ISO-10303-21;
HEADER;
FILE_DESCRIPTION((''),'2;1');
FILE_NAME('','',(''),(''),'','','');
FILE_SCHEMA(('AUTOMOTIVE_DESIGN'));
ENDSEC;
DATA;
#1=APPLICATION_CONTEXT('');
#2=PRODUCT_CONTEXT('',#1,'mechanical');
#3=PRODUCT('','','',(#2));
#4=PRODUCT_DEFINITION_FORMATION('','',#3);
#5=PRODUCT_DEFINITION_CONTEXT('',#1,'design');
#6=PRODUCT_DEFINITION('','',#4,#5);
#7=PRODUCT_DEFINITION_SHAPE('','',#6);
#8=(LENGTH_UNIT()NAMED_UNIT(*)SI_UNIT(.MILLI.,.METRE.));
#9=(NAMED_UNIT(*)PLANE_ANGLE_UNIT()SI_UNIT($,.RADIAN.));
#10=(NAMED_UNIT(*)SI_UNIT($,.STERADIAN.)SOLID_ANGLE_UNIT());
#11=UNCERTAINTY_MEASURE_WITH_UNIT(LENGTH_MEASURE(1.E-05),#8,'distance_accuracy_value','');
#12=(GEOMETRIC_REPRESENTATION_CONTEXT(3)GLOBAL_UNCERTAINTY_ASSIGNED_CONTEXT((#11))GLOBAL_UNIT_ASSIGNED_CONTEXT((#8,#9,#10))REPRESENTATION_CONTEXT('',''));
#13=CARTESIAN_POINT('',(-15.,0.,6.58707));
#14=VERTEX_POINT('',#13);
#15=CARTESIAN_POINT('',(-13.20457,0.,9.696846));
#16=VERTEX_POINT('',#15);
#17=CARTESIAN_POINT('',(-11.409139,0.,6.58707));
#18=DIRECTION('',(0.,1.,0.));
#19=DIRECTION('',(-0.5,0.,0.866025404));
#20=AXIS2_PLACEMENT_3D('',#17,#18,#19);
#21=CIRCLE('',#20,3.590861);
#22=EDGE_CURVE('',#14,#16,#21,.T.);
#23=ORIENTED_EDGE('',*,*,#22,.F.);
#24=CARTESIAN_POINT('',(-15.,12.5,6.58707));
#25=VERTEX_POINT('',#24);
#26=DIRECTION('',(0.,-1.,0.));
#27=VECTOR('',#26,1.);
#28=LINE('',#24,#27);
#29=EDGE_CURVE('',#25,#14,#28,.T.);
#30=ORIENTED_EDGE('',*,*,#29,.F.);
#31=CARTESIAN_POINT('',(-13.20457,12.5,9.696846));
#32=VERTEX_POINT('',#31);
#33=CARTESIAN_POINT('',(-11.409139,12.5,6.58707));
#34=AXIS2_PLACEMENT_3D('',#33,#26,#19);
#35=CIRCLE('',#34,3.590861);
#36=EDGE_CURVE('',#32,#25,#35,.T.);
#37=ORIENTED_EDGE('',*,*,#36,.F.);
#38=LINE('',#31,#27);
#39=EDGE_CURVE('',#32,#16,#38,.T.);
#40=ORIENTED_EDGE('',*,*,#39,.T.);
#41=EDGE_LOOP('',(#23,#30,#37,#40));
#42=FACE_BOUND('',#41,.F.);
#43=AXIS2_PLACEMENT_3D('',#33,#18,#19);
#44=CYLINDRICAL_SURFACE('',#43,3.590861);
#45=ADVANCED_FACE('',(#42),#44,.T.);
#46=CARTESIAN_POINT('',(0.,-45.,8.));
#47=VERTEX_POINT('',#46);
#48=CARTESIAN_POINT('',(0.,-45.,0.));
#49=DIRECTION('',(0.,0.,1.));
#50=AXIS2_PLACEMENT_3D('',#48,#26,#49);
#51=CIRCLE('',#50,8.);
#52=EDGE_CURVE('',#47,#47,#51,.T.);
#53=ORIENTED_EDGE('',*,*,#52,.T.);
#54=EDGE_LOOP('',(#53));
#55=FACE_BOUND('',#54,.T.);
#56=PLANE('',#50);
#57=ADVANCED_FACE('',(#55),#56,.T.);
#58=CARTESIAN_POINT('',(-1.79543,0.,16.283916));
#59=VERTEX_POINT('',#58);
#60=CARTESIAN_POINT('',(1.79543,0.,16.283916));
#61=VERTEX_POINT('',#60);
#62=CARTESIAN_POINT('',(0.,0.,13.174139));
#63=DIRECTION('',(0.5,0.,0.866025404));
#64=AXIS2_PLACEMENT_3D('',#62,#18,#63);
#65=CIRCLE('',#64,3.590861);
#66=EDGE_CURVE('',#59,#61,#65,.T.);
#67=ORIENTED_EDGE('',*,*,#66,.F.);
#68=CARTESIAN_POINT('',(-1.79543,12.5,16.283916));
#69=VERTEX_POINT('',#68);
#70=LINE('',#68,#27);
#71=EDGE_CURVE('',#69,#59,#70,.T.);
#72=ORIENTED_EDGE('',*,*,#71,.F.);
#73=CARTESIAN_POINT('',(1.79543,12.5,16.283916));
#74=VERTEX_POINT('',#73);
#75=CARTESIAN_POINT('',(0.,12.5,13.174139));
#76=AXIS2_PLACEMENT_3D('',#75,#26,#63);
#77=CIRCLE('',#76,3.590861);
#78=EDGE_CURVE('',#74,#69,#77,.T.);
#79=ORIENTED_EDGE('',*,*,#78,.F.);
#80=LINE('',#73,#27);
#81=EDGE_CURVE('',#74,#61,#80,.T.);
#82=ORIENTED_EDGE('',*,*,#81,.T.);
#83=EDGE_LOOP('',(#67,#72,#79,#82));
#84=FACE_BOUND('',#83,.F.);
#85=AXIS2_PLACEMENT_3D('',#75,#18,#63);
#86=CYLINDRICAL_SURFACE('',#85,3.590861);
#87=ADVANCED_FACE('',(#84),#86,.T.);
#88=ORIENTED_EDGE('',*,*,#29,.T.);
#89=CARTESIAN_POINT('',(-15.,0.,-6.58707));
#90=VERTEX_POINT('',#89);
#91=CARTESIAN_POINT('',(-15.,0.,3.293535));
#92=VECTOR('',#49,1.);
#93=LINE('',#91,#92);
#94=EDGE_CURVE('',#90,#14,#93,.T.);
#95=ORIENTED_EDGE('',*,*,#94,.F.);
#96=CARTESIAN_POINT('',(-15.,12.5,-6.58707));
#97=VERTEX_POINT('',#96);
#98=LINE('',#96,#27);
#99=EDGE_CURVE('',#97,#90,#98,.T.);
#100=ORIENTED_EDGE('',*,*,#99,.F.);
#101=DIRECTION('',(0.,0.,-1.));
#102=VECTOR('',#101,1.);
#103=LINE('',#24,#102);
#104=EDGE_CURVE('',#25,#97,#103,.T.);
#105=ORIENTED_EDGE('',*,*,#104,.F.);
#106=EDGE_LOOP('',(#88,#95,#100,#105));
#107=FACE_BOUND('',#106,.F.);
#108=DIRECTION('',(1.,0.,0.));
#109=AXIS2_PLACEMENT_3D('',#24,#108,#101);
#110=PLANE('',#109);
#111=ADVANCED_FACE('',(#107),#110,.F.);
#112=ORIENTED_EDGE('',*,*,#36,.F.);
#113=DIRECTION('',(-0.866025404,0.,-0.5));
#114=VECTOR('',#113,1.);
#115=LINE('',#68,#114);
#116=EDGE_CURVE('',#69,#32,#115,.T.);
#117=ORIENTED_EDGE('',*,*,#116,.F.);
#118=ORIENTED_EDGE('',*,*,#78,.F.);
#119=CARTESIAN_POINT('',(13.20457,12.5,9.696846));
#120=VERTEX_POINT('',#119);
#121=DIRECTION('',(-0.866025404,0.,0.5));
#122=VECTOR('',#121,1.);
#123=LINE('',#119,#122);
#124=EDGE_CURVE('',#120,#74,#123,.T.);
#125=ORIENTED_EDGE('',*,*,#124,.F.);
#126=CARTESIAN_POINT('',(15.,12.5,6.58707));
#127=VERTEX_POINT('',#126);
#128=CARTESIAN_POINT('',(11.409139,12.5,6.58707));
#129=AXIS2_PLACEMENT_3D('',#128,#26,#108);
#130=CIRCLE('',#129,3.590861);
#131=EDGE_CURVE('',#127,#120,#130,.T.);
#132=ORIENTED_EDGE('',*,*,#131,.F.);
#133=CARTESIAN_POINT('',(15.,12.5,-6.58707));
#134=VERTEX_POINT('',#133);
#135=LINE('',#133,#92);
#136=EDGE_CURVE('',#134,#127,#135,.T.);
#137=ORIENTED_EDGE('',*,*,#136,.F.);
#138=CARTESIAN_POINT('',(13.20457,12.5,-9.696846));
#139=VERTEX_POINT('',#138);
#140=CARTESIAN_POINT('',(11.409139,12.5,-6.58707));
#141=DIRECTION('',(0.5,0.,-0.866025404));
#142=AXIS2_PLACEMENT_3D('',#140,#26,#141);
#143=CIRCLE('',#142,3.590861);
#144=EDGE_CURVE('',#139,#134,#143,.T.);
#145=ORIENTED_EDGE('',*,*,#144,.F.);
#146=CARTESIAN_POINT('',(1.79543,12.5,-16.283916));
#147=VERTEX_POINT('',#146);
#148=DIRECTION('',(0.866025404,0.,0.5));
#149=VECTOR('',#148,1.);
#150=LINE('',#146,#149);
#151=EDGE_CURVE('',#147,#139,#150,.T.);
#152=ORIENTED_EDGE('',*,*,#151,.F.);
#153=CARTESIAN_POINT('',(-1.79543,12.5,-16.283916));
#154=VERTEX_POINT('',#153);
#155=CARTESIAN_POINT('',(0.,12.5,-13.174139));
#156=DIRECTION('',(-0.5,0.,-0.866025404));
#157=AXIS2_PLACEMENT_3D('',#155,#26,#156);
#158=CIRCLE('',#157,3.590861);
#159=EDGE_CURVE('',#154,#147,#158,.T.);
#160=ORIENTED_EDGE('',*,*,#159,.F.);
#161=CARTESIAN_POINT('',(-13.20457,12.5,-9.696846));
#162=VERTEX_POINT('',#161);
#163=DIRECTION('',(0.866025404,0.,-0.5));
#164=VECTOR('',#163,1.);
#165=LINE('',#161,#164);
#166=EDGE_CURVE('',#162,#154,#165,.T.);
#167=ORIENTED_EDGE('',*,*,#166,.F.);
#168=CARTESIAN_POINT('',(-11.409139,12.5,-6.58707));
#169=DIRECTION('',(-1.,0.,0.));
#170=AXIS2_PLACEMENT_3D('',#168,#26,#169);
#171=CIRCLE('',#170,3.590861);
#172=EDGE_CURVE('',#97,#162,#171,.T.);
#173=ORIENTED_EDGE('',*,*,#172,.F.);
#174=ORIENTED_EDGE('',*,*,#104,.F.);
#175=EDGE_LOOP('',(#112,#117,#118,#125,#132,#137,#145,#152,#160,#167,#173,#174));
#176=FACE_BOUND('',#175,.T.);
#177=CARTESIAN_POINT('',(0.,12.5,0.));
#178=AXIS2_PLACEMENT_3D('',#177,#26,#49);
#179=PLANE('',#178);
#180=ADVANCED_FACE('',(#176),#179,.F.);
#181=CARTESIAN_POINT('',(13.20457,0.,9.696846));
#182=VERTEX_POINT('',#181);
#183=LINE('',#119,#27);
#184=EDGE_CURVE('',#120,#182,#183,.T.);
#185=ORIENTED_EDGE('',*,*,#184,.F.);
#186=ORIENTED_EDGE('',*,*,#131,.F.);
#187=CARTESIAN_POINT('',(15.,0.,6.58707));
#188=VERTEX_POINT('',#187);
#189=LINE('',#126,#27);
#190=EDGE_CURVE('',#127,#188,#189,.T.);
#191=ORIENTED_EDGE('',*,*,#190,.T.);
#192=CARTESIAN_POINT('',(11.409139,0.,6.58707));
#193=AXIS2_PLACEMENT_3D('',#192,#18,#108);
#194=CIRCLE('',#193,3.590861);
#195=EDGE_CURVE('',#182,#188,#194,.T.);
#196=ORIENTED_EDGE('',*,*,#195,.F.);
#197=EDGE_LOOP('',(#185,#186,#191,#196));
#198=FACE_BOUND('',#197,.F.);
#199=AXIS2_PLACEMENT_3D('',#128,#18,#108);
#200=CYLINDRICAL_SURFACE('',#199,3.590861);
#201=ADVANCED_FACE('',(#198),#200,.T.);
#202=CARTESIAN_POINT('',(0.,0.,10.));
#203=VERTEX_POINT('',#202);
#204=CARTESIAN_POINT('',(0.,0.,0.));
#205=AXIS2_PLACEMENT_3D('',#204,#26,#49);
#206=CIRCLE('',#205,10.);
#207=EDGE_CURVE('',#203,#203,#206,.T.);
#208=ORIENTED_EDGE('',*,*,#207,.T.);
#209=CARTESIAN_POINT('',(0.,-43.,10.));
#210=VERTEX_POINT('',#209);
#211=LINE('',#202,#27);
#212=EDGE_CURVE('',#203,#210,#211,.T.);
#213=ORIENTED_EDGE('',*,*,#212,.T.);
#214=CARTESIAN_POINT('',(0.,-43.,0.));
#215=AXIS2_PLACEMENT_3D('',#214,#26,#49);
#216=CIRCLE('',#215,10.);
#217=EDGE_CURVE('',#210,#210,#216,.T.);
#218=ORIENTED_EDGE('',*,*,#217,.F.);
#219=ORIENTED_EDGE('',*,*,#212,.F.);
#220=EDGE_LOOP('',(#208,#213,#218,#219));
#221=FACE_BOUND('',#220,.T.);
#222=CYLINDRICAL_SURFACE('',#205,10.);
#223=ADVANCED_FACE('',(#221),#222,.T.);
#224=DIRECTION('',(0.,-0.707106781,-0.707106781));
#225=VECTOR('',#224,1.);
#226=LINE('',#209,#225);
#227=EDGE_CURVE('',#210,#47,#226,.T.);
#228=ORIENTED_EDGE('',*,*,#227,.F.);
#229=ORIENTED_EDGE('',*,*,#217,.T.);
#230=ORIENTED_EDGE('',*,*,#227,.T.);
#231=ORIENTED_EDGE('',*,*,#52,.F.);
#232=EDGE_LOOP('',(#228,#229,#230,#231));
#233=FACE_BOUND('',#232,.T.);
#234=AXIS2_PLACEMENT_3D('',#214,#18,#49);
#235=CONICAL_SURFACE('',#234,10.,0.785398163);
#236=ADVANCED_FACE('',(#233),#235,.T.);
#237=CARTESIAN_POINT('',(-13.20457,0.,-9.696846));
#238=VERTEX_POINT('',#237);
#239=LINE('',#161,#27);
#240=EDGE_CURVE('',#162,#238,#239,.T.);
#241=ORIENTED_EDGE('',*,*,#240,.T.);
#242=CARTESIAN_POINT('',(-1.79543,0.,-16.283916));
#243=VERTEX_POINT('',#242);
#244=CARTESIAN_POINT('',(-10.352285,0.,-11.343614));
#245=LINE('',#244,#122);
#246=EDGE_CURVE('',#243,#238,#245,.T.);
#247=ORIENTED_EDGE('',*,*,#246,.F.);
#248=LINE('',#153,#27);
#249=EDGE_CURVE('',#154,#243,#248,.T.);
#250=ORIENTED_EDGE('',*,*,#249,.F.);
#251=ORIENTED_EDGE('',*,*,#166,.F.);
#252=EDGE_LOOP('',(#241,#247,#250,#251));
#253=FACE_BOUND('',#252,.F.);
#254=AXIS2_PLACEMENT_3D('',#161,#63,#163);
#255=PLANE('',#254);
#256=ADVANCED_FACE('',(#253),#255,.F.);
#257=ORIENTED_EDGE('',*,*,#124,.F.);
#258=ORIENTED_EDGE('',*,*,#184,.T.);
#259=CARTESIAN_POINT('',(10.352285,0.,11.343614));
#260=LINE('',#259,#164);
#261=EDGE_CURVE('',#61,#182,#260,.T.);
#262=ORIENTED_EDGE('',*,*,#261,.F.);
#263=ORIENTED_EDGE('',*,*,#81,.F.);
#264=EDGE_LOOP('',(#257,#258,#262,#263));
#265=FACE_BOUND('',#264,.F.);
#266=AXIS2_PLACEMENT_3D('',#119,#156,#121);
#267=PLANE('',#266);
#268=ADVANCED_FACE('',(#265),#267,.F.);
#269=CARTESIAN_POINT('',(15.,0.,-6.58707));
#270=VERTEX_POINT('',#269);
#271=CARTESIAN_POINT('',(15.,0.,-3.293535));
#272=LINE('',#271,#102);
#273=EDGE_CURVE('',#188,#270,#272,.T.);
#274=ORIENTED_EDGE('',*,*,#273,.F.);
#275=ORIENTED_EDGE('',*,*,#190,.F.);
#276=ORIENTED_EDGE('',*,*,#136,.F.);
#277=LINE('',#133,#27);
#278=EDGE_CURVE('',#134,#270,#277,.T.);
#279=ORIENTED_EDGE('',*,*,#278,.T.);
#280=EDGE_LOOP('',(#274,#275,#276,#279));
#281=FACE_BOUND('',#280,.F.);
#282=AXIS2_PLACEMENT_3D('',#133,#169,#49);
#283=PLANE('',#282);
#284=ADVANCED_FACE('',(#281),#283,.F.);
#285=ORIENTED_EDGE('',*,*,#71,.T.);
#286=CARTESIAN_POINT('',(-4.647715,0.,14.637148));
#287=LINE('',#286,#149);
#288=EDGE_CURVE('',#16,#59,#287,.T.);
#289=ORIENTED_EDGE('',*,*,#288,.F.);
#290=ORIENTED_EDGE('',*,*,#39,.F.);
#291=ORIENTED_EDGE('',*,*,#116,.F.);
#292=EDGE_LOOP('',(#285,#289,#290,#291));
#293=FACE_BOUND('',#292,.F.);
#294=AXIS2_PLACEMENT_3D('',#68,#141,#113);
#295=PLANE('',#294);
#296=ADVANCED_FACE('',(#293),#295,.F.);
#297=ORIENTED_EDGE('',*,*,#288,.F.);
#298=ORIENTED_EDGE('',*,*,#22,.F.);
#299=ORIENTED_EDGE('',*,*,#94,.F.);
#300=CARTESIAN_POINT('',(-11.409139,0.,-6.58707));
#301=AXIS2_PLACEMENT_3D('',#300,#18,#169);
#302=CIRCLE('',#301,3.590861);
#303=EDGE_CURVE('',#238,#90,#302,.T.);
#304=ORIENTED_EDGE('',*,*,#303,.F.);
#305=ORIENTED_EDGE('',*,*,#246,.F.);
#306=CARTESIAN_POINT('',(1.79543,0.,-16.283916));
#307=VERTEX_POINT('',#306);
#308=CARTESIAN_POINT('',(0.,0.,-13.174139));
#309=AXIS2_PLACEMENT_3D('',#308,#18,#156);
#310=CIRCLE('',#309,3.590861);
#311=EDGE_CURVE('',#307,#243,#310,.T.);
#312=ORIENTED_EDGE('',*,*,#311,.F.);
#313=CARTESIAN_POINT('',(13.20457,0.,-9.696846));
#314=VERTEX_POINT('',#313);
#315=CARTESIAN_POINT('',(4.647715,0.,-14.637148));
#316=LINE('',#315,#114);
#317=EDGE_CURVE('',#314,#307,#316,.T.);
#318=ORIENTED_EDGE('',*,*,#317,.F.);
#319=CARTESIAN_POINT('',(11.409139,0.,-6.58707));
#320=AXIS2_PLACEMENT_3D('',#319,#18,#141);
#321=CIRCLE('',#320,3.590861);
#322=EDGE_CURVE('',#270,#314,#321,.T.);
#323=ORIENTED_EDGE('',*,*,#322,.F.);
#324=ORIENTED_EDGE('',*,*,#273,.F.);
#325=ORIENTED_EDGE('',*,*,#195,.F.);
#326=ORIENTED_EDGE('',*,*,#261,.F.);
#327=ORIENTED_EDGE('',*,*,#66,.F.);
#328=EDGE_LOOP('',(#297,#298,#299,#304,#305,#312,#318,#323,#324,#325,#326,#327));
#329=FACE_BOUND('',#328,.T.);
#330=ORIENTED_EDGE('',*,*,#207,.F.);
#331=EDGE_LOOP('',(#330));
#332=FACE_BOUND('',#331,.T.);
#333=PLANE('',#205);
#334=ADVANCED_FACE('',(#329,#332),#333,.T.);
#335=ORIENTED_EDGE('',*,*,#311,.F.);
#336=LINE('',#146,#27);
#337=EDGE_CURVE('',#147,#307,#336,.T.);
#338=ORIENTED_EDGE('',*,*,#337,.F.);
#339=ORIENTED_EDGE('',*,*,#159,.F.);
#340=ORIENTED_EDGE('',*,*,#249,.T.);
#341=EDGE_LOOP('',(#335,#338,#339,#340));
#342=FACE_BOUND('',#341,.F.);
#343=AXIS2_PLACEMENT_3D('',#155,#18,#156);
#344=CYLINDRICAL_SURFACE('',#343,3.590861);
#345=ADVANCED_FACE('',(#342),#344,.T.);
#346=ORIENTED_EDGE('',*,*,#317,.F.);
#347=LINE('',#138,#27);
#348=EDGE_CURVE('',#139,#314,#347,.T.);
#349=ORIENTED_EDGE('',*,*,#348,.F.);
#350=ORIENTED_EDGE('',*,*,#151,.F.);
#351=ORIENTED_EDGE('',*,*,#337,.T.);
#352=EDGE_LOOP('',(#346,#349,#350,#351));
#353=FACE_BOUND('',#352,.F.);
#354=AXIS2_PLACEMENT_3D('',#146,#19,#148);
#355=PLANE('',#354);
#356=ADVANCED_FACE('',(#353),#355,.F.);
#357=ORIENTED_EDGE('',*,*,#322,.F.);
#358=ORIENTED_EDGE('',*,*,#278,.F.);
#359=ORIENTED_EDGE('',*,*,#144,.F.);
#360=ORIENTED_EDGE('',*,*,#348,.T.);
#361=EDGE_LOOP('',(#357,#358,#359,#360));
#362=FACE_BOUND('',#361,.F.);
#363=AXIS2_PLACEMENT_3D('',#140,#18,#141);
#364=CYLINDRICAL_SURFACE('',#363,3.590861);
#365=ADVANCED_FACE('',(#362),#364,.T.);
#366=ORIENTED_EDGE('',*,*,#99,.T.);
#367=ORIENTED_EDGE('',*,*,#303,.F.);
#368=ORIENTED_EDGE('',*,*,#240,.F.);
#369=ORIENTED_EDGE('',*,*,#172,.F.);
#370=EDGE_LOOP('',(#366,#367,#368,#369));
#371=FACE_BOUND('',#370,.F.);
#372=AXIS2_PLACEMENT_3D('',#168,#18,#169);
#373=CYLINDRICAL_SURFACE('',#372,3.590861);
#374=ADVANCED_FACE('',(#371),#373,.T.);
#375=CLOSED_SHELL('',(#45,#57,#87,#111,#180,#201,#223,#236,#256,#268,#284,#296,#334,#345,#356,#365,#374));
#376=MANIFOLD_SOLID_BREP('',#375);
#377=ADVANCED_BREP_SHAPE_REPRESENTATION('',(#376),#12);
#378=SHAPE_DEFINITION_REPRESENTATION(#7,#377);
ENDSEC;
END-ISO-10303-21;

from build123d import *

# Parameters (mm, degrees)
F2_R     = 25.1475
F3_DEPTH = 25


# Not quite as in the source:
# - a feature names something its author has since deleted; it is built from what else it names


with BuildPart() as f1:
    # F0 (on Right) → F1 (revolve)
    with BuildSketch(Plane.YZ):
        Polygon((0, 25.1475), (0, 10), (-43, 10), (-45, 8), (-45, 0), (12.5, 0), (12.5, 25.1475), align=None)
    revolve(axis=Axis((0, -16.25, 0), (0, -1, 0)))

    # F2 (on face) → F3 (cut)
    with BuildSketch(Plane(origin=(0, 12.5, 0), x_dir=(-1, 0, 0), z_dir=(0, 1, 0))):
        Circle(F2_R)
        with BuildLine():
            ThreePointArc((1.7954303246, -16.2839158944), (0, -16.765), (-1.7954303246, -16.2839158944))
            Line((-1.7954303246, -16.2839158944), (-13.2045696754, -9.6968462191))
            ThreePointArc((-13.2045696754, -9.6968462191), (-14.5189158944, -8.3825), (-15, -6.5870696754))
            Line((-15, -6.5870696754), (-15, 6.5870696754))
            ThreePointArc((-15, 6.5870696754), (-14.5189158944, 8.3825), (-13.2045696754, 9.6968462191))
            Line((-13.2045696754, 9.6968462191), (-1.7954303246, 16.2839158944))
            ThreePointArc((-1.7954303246, 16.2839158944), (0, 16.765), (1.7954303246, 16.2839158944))
            Line((1.7954303246, 16.2839158944), (13.2045696754, 9.6968462191))
            ThreePointArc((13.2045696754, 9.6968462191), (14.5189158944, 8.3825), (15, 6.5870696754))
            Line((15, 6.5870696754), (15, -6.5870696754))
            ThreePointArc((15, -6.5870696754), (14.5189158944, -8.3825), (13.2045696754, -9.6968462191))
            Line((13.2045696754, -9.6968462191), (1.7954303246, -16.2839158944))
        make_face(mode=Mode.SUBTRACT)
    extrude(amount=-F3_DEPTH, mode=Mode.SUBTRACT)


solid = f1.part
